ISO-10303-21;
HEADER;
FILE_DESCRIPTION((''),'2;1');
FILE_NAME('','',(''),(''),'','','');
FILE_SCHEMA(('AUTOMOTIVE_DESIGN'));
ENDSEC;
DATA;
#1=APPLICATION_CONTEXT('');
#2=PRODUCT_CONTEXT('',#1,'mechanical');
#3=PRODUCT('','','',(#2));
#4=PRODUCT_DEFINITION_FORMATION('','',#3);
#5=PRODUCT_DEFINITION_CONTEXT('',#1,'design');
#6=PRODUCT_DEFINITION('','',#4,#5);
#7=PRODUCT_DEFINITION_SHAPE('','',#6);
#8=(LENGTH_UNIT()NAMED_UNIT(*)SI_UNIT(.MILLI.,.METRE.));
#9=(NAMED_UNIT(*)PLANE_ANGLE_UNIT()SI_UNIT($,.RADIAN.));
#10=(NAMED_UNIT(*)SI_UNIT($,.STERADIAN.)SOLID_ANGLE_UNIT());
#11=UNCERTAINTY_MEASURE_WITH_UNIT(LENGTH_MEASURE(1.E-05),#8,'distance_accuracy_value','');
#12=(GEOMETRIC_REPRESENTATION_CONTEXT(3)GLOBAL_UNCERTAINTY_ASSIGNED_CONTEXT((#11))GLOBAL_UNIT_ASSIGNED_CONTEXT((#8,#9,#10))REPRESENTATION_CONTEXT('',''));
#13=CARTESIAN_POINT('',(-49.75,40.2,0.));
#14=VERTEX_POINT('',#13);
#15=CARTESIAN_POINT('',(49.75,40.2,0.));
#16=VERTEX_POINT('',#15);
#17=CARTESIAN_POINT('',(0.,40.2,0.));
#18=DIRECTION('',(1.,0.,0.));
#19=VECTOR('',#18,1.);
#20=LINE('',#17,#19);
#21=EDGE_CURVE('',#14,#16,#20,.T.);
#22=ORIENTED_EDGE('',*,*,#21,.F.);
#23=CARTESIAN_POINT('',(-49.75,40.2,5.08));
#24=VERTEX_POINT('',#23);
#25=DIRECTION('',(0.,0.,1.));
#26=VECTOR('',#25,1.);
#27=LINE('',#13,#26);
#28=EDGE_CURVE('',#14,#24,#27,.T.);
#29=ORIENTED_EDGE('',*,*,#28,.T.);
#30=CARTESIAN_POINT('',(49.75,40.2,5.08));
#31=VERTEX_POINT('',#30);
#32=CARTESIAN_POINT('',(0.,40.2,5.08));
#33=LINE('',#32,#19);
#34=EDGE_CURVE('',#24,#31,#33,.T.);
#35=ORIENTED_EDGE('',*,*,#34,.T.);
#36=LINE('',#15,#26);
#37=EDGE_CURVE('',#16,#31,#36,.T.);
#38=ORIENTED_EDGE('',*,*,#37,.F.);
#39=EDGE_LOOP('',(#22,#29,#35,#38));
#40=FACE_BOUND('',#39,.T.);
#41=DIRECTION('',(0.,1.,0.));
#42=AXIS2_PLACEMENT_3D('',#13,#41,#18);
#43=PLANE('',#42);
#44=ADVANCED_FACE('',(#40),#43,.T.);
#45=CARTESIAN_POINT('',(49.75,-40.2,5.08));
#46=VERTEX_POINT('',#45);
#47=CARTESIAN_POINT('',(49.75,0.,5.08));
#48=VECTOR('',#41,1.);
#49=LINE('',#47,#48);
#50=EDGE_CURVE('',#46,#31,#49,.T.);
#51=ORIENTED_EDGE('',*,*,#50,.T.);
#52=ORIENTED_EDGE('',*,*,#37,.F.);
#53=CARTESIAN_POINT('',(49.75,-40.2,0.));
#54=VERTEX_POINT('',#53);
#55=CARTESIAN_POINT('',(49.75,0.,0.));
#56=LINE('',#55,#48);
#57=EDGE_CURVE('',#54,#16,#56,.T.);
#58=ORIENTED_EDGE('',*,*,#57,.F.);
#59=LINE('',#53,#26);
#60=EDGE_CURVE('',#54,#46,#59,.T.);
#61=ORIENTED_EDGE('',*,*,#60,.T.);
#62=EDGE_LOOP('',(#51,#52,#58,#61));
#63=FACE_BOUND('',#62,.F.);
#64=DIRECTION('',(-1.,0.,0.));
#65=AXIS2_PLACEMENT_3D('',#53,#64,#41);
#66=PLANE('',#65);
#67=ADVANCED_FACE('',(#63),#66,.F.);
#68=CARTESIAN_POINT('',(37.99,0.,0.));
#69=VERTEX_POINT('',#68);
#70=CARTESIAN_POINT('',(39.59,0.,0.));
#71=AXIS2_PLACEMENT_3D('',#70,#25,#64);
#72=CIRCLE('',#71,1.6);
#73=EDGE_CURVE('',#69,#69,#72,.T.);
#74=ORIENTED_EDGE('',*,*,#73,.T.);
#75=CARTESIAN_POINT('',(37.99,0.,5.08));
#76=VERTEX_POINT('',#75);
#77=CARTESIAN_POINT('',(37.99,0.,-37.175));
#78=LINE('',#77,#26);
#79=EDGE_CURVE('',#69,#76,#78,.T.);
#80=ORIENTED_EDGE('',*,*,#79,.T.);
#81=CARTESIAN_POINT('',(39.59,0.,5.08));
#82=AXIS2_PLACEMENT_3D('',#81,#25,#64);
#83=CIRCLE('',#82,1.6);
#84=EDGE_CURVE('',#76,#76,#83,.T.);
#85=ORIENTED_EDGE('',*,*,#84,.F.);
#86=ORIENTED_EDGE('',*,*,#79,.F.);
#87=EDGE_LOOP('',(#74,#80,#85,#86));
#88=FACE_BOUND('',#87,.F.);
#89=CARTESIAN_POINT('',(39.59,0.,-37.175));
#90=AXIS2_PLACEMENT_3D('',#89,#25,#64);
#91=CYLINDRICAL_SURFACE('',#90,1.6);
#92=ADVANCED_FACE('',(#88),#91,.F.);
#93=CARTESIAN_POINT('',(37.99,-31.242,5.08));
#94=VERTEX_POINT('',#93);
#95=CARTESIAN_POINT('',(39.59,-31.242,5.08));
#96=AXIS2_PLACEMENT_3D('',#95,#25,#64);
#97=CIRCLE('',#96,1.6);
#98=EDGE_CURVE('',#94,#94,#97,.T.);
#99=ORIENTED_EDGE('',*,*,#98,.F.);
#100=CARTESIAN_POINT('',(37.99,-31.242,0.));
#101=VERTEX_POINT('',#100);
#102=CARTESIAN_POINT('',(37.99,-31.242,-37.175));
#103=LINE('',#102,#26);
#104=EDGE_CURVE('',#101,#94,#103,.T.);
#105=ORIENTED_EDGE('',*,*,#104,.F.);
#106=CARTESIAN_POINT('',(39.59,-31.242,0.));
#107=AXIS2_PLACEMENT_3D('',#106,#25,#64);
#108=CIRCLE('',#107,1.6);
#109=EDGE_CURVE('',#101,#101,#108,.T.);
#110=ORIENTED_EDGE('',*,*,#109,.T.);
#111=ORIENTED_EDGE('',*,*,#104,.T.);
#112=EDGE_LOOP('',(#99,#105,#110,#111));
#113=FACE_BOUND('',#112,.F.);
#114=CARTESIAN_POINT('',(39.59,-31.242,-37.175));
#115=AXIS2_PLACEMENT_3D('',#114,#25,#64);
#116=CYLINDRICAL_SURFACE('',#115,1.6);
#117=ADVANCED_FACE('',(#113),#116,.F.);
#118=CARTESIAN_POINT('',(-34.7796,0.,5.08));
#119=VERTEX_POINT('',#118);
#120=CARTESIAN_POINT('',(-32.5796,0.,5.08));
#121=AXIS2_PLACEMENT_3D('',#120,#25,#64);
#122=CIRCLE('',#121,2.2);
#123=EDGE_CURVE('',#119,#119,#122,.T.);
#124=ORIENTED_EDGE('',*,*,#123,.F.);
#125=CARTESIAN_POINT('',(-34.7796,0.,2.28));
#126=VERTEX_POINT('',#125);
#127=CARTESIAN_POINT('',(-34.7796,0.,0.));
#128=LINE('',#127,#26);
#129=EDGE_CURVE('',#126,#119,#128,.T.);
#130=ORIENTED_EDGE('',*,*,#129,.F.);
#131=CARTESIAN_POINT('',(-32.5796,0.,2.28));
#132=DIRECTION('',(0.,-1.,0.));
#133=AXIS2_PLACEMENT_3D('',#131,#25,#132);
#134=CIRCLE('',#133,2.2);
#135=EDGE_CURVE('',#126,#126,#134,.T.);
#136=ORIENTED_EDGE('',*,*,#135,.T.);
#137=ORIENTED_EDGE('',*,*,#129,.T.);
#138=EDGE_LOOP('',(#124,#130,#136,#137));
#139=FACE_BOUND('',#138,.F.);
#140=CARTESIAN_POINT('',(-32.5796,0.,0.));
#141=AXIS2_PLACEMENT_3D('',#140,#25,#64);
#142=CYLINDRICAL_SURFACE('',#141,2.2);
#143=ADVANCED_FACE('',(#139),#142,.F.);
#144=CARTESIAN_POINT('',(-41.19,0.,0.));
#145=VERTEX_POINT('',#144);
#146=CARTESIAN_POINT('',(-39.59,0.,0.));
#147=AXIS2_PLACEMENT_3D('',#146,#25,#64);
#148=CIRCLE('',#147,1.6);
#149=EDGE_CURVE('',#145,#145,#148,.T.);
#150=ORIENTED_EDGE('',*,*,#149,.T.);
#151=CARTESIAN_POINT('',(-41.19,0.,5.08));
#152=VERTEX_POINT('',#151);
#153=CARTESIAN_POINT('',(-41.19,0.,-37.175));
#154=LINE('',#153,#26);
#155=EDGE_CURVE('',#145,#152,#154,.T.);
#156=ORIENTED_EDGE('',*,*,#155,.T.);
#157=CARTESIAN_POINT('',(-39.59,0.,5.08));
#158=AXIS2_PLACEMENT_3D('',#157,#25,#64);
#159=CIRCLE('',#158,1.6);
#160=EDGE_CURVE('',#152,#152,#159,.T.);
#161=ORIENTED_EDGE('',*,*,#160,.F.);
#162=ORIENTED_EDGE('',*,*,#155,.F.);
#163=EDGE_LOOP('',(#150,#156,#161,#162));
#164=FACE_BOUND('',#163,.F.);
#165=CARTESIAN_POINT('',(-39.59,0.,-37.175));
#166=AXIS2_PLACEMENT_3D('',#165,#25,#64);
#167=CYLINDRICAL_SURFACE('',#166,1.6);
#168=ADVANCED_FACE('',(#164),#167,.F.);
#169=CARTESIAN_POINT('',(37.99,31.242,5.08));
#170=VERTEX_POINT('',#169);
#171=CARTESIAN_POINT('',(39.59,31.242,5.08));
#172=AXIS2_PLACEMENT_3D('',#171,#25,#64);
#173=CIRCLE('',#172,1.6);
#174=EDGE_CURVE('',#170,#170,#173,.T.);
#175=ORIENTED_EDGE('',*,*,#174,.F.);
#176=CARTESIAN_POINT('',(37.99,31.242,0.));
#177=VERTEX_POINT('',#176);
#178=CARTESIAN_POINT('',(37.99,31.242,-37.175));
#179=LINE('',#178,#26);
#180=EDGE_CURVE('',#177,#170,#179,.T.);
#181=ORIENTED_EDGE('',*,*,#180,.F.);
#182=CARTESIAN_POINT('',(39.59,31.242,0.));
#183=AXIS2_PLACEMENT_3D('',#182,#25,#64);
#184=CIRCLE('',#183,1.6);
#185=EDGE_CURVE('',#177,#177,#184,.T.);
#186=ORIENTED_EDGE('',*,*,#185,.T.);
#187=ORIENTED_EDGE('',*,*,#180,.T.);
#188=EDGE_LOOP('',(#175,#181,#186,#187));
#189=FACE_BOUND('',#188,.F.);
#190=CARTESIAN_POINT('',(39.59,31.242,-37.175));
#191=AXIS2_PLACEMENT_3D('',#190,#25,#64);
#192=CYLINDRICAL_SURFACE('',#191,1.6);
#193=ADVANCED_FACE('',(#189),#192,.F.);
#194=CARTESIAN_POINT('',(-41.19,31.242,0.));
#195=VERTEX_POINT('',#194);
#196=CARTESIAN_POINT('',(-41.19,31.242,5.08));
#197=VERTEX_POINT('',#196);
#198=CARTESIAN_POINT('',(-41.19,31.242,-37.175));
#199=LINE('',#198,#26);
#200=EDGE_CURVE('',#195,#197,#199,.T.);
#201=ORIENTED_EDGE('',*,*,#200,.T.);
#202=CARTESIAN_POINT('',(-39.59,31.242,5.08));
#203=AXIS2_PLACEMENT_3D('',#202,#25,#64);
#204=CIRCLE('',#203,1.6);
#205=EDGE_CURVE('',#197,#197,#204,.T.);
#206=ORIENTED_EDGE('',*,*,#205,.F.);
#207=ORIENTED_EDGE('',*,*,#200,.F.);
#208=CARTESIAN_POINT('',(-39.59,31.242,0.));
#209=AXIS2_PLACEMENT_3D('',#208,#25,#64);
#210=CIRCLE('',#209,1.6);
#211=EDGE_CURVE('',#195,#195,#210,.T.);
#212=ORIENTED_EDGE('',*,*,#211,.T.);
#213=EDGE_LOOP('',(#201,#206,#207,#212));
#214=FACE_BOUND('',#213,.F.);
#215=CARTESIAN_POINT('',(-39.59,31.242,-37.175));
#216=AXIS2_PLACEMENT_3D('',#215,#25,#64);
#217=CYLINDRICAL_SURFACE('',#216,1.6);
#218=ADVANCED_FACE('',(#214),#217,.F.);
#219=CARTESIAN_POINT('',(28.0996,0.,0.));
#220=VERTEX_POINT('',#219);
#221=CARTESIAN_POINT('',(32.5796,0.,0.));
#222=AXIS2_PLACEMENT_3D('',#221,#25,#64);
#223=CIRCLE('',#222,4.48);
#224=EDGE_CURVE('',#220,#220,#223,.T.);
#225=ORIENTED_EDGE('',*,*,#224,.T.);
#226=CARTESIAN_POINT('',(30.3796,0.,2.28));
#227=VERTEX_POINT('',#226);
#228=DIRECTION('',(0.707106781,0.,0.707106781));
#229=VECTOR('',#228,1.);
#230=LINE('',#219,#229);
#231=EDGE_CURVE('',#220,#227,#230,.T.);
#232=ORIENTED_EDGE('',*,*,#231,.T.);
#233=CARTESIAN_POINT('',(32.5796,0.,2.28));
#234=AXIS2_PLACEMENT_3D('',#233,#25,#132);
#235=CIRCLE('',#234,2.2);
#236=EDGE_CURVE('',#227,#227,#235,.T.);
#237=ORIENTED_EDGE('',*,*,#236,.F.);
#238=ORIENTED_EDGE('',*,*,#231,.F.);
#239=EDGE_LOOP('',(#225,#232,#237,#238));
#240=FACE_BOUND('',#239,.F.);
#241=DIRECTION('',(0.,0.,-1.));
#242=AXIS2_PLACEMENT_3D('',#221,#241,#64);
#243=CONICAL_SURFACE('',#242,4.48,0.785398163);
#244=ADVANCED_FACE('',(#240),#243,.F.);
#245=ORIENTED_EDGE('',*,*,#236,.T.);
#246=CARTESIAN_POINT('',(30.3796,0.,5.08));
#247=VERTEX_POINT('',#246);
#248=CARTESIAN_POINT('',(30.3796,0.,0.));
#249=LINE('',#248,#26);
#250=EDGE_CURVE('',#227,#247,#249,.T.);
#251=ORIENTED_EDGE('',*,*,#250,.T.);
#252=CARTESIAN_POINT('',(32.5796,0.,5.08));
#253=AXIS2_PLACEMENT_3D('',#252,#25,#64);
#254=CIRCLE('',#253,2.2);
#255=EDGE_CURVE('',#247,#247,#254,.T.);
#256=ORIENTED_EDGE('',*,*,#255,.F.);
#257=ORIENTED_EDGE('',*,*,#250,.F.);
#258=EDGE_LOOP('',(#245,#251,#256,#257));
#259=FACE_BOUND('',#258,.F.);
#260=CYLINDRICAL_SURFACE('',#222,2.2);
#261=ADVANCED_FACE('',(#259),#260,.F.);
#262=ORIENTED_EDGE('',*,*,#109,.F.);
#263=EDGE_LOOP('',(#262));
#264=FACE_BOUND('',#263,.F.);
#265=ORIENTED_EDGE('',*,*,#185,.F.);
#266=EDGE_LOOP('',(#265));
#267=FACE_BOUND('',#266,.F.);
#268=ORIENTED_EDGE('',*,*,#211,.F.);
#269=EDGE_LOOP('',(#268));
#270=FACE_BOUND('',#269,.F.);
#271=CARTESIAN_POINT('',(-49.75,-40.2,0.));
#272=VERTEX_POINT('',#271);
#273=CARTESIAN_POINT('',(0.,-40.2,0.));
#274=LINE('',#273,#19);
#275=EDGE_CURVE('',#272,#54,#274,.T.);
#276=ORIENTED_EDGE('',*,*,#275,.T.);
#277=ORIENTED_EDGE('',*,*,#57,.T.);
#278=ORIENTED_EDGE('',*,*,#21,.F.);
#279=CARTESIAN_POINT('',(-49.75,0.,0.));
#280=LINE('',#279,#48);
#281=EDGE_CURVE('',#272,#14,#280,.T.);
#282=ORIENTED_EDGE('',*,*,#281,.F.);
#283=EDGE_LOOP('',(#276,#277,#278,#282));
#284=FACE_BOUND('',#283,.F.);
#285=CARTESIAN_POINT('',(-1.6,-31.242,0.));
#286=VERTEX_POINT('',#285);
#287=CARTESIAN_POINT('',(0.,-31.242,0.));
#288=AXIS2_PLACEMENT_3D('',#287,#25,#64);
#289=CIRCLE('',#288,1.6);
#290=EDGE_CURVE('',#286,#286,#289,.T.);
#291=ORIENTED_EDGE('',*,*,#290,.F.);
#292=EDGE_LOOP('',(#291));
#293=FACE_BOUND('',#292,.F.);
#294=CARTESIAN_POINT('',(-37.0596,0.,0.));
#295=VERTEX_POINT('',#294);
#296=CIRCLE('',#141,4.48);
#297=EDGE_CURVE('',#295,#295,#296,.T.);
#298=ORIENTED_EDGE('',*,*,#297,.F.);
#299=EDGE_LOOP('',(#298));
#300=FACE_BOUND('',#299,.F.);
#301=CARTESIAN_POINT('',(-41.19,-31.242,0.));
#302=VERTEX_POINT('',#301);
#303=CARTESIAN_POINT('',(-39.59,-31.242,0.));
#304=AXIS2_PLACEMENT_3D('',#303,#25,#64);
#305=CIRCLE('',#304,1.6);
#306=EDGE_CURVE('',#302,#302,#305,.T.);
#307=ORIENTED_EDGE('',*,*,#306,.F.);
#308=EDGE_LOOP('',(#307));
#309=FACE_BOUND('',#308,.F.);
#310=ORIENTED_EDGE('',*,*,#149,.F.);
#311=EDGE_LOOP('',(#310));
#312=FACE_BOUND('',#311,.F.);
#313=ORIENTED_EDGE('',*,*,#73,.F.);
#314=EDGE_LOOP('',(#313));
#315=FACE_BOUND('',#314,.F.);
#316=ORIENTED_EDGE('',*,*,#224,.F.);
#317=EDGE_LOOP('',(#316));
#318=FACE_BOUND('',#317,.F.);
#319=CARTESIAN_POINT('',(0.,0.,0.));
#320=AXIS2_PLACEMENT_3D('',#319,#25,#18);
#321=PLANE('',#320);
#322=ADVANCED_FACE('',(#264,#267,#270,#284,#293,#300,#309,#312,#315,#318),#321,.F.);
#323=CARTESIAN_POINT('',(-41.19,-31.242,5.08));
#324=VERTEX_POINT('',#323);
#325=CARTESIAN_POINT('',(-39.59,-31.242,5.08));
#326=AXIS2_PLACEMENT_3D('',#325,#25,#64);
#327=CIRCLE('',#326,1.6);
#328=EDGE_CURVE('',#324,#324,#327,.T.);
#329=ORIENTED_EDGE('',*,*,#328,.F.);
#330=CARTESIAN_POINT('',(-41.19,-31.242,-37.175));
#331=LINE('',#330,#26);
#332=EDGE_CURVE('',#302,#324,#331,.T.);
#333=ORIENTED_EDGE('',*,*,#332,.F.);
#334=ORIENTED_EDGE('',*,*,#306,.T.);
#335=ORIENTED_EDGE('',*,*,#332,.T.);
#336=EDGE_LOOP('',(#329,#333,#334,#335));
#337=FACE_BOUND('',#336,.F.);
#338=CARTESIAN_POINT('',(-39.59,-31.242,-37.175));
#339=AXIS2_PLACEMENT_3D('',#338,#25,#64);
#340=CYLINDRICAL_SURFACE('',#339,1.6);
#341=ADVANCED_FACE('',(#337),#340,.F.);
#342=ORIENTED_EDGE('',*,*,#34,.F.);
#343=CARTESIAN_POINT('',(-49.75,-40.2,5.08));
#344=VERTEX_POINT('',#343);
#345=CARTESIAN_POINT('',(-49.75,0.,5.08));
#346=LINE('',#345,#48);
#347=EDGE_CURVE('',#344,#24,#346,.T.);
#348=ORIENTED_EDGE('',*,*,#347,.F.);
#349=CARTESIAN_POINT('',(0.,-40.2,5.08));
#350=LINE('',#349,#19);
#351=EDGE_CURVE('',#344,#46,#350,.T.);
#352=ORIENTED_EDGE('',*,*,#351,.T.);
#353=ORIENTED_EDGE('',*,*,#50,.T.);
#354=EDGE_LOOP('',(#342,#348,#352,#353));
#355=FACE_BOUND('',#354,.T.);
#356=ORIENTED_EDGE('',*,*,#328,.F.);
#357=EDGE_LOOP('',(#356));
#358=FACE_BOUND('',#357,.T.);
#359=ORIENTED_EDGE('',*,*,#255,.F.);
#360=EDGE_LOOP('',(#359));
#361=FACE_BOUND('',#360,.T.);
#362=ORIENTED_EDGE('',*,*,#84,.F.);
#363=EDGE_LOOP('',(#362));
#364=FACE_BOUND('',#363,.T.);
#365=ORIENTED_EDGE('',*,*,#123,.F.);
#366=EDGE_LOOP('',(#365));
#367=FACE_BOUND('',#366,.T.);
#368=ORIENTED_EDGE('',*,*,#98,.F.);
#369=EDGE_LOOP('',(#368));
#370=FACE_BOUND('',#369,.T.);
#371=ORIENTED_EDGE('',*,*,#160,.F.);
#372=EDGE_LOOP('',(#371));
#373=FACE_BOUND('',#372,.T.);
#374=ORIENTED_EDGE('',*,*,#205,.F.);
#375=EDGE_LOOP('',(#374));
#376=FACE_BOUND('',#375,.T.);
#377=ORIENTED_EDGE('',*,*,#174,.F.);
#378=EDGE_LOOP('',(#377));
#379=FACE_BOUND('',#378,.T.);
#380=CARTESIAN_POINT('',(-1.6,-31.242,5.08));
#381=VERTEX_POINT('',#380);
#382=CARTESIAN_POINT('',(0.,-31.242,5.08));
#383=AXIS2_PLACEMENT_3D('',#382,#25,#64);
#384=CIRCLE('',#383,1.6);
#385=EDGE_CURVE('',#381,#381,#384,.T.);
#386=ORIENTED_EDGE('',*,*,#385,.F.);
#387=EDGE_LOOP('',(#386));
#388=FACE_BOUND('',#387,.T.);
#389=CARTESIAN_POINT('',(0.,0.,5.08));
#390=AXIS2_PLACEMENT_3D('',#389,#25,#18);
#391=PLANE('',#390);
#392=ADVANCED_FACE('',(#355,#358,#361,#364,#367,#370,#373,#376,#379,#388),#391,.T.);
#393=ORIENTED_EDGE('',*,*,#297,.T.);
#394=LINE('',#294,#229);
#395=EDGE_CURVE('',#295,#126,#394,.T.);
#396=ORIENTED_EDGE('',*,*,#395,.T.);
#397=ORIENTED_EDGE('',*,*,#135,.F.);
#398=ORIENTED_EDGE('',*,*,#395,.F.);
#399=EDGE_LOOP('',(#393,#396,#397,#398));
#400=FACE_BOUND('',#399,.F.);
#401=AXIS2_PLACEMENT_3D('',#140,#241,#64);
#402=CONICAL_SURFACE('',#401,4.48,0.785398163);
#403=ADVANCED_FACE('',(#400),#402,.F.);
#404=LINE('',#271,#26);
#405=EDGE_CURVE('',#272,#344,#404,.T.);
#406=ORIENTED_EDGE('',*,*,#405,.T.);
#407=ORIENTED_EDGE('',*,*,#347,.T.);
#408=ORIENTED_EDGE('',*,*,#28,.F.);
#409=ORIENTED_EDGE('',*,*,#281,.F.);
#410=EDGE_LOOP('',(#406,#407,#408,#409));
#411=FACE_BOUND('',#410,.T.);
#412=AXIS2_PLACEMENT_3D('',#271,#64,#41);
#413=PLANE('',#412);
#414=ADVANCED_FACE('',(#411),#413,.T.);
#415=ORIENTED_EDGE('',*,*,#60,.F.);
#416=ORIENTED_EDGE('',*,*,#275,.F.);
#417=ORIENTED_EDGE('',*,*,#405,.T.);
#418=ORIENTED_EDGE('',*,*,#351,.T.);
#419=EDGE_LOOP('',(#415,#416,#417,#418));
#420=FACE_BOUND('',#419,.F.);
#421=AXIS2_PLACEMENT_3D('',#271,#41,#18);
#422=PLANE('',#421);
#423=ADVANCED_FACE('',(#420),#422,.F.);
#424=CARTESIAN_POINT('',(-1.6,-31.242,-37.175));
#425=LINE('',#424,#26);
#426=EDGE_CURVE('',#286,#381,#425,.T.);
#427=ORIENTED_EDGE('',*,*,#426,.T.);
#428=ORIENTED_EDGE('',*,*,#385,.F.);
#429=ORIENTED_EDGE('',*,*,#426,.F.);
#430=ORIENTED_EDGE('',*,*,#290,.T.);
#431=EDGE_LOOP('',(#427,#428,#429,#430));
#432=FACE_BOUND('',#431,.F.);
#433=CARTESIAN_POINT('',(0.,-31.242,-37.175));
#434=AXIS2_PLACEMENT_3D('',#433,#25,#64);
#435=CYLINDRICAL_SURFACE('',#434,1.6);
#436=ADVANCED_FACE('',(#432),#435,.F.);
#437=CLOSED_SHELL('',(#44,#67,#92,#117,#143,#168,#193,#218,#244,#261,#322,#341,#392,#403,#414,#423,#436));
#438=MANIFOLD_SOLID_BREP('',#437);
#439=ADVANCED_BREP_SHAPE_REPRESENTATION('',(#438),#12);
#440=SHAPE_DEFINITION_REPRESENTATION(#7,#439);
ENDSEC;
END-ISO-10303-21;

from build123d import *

# Parameters (mm, degrees)
F0_W           = 99.5
F0_H           = 80.4
F1_DEPTH       = 5.08
F3_D           = 4.4
F3_DEPTH       = 38.1
F3_CSINK_D     = 8.96
F3_CSINK_ANGLE = 90
F3_TIP         = 1.3218933619
F5_D           = 3.2
F5_DEPTH       = 37.175
F5_TIP         = 0.9613769904


# Not quite as in the source:
# - a feature names something its author has since deleted; it is built from what else it names


with BuildPart() as f1:
    # F0 (on Top) → F1 (new body)
    with BuildSketch(Plane.XY):
        Rectangle(F0_W, F0_H)
    extrude(amount=F1_DEPTH)

    # F3
    with Locations(Plane(origin=(0, 0, 0), x_dir=(1, 0, 0), z_dir=(0, 0, -1))):
        with Locations((-32.5796, 0), (32.5796, 0)):
            CounterSinkHole(F3_D / 2, F3_CSINK_D / 2, depth=F3_DEPTH, counter_sink_angle=F3_CSINK_ANGLE)
            with Locations((0, 0, -(F3_DEPTH + F3_TIP / 2))):  # 118° drill point
                Cone(0, F3_D / 2, F3_TIP, mode=Mode.SUBTRACT)

    # F5
    with Locations(Plane(origin=(0, 0, 0), x_dir=(1, 0, 0), z_dir=(0, 0, -1))):
        with Locations((-39.59, 31.242), (-39.59, 0), (-39.59, -31.242), (39.59, -31.242), (39.59, 0), (39.59, 31.242), (0, 31.242)):
            Hole(F5_D / 2, depth=F5_DEPTH)
            with Locations((0, 0, -(F5_DEPTH + F5_TIP / 2))):  # 118° drill point
                Cone(0, F5_D / 2, F5_TIP, mode=Mode.SUBTRACT)


solid = f1.part
